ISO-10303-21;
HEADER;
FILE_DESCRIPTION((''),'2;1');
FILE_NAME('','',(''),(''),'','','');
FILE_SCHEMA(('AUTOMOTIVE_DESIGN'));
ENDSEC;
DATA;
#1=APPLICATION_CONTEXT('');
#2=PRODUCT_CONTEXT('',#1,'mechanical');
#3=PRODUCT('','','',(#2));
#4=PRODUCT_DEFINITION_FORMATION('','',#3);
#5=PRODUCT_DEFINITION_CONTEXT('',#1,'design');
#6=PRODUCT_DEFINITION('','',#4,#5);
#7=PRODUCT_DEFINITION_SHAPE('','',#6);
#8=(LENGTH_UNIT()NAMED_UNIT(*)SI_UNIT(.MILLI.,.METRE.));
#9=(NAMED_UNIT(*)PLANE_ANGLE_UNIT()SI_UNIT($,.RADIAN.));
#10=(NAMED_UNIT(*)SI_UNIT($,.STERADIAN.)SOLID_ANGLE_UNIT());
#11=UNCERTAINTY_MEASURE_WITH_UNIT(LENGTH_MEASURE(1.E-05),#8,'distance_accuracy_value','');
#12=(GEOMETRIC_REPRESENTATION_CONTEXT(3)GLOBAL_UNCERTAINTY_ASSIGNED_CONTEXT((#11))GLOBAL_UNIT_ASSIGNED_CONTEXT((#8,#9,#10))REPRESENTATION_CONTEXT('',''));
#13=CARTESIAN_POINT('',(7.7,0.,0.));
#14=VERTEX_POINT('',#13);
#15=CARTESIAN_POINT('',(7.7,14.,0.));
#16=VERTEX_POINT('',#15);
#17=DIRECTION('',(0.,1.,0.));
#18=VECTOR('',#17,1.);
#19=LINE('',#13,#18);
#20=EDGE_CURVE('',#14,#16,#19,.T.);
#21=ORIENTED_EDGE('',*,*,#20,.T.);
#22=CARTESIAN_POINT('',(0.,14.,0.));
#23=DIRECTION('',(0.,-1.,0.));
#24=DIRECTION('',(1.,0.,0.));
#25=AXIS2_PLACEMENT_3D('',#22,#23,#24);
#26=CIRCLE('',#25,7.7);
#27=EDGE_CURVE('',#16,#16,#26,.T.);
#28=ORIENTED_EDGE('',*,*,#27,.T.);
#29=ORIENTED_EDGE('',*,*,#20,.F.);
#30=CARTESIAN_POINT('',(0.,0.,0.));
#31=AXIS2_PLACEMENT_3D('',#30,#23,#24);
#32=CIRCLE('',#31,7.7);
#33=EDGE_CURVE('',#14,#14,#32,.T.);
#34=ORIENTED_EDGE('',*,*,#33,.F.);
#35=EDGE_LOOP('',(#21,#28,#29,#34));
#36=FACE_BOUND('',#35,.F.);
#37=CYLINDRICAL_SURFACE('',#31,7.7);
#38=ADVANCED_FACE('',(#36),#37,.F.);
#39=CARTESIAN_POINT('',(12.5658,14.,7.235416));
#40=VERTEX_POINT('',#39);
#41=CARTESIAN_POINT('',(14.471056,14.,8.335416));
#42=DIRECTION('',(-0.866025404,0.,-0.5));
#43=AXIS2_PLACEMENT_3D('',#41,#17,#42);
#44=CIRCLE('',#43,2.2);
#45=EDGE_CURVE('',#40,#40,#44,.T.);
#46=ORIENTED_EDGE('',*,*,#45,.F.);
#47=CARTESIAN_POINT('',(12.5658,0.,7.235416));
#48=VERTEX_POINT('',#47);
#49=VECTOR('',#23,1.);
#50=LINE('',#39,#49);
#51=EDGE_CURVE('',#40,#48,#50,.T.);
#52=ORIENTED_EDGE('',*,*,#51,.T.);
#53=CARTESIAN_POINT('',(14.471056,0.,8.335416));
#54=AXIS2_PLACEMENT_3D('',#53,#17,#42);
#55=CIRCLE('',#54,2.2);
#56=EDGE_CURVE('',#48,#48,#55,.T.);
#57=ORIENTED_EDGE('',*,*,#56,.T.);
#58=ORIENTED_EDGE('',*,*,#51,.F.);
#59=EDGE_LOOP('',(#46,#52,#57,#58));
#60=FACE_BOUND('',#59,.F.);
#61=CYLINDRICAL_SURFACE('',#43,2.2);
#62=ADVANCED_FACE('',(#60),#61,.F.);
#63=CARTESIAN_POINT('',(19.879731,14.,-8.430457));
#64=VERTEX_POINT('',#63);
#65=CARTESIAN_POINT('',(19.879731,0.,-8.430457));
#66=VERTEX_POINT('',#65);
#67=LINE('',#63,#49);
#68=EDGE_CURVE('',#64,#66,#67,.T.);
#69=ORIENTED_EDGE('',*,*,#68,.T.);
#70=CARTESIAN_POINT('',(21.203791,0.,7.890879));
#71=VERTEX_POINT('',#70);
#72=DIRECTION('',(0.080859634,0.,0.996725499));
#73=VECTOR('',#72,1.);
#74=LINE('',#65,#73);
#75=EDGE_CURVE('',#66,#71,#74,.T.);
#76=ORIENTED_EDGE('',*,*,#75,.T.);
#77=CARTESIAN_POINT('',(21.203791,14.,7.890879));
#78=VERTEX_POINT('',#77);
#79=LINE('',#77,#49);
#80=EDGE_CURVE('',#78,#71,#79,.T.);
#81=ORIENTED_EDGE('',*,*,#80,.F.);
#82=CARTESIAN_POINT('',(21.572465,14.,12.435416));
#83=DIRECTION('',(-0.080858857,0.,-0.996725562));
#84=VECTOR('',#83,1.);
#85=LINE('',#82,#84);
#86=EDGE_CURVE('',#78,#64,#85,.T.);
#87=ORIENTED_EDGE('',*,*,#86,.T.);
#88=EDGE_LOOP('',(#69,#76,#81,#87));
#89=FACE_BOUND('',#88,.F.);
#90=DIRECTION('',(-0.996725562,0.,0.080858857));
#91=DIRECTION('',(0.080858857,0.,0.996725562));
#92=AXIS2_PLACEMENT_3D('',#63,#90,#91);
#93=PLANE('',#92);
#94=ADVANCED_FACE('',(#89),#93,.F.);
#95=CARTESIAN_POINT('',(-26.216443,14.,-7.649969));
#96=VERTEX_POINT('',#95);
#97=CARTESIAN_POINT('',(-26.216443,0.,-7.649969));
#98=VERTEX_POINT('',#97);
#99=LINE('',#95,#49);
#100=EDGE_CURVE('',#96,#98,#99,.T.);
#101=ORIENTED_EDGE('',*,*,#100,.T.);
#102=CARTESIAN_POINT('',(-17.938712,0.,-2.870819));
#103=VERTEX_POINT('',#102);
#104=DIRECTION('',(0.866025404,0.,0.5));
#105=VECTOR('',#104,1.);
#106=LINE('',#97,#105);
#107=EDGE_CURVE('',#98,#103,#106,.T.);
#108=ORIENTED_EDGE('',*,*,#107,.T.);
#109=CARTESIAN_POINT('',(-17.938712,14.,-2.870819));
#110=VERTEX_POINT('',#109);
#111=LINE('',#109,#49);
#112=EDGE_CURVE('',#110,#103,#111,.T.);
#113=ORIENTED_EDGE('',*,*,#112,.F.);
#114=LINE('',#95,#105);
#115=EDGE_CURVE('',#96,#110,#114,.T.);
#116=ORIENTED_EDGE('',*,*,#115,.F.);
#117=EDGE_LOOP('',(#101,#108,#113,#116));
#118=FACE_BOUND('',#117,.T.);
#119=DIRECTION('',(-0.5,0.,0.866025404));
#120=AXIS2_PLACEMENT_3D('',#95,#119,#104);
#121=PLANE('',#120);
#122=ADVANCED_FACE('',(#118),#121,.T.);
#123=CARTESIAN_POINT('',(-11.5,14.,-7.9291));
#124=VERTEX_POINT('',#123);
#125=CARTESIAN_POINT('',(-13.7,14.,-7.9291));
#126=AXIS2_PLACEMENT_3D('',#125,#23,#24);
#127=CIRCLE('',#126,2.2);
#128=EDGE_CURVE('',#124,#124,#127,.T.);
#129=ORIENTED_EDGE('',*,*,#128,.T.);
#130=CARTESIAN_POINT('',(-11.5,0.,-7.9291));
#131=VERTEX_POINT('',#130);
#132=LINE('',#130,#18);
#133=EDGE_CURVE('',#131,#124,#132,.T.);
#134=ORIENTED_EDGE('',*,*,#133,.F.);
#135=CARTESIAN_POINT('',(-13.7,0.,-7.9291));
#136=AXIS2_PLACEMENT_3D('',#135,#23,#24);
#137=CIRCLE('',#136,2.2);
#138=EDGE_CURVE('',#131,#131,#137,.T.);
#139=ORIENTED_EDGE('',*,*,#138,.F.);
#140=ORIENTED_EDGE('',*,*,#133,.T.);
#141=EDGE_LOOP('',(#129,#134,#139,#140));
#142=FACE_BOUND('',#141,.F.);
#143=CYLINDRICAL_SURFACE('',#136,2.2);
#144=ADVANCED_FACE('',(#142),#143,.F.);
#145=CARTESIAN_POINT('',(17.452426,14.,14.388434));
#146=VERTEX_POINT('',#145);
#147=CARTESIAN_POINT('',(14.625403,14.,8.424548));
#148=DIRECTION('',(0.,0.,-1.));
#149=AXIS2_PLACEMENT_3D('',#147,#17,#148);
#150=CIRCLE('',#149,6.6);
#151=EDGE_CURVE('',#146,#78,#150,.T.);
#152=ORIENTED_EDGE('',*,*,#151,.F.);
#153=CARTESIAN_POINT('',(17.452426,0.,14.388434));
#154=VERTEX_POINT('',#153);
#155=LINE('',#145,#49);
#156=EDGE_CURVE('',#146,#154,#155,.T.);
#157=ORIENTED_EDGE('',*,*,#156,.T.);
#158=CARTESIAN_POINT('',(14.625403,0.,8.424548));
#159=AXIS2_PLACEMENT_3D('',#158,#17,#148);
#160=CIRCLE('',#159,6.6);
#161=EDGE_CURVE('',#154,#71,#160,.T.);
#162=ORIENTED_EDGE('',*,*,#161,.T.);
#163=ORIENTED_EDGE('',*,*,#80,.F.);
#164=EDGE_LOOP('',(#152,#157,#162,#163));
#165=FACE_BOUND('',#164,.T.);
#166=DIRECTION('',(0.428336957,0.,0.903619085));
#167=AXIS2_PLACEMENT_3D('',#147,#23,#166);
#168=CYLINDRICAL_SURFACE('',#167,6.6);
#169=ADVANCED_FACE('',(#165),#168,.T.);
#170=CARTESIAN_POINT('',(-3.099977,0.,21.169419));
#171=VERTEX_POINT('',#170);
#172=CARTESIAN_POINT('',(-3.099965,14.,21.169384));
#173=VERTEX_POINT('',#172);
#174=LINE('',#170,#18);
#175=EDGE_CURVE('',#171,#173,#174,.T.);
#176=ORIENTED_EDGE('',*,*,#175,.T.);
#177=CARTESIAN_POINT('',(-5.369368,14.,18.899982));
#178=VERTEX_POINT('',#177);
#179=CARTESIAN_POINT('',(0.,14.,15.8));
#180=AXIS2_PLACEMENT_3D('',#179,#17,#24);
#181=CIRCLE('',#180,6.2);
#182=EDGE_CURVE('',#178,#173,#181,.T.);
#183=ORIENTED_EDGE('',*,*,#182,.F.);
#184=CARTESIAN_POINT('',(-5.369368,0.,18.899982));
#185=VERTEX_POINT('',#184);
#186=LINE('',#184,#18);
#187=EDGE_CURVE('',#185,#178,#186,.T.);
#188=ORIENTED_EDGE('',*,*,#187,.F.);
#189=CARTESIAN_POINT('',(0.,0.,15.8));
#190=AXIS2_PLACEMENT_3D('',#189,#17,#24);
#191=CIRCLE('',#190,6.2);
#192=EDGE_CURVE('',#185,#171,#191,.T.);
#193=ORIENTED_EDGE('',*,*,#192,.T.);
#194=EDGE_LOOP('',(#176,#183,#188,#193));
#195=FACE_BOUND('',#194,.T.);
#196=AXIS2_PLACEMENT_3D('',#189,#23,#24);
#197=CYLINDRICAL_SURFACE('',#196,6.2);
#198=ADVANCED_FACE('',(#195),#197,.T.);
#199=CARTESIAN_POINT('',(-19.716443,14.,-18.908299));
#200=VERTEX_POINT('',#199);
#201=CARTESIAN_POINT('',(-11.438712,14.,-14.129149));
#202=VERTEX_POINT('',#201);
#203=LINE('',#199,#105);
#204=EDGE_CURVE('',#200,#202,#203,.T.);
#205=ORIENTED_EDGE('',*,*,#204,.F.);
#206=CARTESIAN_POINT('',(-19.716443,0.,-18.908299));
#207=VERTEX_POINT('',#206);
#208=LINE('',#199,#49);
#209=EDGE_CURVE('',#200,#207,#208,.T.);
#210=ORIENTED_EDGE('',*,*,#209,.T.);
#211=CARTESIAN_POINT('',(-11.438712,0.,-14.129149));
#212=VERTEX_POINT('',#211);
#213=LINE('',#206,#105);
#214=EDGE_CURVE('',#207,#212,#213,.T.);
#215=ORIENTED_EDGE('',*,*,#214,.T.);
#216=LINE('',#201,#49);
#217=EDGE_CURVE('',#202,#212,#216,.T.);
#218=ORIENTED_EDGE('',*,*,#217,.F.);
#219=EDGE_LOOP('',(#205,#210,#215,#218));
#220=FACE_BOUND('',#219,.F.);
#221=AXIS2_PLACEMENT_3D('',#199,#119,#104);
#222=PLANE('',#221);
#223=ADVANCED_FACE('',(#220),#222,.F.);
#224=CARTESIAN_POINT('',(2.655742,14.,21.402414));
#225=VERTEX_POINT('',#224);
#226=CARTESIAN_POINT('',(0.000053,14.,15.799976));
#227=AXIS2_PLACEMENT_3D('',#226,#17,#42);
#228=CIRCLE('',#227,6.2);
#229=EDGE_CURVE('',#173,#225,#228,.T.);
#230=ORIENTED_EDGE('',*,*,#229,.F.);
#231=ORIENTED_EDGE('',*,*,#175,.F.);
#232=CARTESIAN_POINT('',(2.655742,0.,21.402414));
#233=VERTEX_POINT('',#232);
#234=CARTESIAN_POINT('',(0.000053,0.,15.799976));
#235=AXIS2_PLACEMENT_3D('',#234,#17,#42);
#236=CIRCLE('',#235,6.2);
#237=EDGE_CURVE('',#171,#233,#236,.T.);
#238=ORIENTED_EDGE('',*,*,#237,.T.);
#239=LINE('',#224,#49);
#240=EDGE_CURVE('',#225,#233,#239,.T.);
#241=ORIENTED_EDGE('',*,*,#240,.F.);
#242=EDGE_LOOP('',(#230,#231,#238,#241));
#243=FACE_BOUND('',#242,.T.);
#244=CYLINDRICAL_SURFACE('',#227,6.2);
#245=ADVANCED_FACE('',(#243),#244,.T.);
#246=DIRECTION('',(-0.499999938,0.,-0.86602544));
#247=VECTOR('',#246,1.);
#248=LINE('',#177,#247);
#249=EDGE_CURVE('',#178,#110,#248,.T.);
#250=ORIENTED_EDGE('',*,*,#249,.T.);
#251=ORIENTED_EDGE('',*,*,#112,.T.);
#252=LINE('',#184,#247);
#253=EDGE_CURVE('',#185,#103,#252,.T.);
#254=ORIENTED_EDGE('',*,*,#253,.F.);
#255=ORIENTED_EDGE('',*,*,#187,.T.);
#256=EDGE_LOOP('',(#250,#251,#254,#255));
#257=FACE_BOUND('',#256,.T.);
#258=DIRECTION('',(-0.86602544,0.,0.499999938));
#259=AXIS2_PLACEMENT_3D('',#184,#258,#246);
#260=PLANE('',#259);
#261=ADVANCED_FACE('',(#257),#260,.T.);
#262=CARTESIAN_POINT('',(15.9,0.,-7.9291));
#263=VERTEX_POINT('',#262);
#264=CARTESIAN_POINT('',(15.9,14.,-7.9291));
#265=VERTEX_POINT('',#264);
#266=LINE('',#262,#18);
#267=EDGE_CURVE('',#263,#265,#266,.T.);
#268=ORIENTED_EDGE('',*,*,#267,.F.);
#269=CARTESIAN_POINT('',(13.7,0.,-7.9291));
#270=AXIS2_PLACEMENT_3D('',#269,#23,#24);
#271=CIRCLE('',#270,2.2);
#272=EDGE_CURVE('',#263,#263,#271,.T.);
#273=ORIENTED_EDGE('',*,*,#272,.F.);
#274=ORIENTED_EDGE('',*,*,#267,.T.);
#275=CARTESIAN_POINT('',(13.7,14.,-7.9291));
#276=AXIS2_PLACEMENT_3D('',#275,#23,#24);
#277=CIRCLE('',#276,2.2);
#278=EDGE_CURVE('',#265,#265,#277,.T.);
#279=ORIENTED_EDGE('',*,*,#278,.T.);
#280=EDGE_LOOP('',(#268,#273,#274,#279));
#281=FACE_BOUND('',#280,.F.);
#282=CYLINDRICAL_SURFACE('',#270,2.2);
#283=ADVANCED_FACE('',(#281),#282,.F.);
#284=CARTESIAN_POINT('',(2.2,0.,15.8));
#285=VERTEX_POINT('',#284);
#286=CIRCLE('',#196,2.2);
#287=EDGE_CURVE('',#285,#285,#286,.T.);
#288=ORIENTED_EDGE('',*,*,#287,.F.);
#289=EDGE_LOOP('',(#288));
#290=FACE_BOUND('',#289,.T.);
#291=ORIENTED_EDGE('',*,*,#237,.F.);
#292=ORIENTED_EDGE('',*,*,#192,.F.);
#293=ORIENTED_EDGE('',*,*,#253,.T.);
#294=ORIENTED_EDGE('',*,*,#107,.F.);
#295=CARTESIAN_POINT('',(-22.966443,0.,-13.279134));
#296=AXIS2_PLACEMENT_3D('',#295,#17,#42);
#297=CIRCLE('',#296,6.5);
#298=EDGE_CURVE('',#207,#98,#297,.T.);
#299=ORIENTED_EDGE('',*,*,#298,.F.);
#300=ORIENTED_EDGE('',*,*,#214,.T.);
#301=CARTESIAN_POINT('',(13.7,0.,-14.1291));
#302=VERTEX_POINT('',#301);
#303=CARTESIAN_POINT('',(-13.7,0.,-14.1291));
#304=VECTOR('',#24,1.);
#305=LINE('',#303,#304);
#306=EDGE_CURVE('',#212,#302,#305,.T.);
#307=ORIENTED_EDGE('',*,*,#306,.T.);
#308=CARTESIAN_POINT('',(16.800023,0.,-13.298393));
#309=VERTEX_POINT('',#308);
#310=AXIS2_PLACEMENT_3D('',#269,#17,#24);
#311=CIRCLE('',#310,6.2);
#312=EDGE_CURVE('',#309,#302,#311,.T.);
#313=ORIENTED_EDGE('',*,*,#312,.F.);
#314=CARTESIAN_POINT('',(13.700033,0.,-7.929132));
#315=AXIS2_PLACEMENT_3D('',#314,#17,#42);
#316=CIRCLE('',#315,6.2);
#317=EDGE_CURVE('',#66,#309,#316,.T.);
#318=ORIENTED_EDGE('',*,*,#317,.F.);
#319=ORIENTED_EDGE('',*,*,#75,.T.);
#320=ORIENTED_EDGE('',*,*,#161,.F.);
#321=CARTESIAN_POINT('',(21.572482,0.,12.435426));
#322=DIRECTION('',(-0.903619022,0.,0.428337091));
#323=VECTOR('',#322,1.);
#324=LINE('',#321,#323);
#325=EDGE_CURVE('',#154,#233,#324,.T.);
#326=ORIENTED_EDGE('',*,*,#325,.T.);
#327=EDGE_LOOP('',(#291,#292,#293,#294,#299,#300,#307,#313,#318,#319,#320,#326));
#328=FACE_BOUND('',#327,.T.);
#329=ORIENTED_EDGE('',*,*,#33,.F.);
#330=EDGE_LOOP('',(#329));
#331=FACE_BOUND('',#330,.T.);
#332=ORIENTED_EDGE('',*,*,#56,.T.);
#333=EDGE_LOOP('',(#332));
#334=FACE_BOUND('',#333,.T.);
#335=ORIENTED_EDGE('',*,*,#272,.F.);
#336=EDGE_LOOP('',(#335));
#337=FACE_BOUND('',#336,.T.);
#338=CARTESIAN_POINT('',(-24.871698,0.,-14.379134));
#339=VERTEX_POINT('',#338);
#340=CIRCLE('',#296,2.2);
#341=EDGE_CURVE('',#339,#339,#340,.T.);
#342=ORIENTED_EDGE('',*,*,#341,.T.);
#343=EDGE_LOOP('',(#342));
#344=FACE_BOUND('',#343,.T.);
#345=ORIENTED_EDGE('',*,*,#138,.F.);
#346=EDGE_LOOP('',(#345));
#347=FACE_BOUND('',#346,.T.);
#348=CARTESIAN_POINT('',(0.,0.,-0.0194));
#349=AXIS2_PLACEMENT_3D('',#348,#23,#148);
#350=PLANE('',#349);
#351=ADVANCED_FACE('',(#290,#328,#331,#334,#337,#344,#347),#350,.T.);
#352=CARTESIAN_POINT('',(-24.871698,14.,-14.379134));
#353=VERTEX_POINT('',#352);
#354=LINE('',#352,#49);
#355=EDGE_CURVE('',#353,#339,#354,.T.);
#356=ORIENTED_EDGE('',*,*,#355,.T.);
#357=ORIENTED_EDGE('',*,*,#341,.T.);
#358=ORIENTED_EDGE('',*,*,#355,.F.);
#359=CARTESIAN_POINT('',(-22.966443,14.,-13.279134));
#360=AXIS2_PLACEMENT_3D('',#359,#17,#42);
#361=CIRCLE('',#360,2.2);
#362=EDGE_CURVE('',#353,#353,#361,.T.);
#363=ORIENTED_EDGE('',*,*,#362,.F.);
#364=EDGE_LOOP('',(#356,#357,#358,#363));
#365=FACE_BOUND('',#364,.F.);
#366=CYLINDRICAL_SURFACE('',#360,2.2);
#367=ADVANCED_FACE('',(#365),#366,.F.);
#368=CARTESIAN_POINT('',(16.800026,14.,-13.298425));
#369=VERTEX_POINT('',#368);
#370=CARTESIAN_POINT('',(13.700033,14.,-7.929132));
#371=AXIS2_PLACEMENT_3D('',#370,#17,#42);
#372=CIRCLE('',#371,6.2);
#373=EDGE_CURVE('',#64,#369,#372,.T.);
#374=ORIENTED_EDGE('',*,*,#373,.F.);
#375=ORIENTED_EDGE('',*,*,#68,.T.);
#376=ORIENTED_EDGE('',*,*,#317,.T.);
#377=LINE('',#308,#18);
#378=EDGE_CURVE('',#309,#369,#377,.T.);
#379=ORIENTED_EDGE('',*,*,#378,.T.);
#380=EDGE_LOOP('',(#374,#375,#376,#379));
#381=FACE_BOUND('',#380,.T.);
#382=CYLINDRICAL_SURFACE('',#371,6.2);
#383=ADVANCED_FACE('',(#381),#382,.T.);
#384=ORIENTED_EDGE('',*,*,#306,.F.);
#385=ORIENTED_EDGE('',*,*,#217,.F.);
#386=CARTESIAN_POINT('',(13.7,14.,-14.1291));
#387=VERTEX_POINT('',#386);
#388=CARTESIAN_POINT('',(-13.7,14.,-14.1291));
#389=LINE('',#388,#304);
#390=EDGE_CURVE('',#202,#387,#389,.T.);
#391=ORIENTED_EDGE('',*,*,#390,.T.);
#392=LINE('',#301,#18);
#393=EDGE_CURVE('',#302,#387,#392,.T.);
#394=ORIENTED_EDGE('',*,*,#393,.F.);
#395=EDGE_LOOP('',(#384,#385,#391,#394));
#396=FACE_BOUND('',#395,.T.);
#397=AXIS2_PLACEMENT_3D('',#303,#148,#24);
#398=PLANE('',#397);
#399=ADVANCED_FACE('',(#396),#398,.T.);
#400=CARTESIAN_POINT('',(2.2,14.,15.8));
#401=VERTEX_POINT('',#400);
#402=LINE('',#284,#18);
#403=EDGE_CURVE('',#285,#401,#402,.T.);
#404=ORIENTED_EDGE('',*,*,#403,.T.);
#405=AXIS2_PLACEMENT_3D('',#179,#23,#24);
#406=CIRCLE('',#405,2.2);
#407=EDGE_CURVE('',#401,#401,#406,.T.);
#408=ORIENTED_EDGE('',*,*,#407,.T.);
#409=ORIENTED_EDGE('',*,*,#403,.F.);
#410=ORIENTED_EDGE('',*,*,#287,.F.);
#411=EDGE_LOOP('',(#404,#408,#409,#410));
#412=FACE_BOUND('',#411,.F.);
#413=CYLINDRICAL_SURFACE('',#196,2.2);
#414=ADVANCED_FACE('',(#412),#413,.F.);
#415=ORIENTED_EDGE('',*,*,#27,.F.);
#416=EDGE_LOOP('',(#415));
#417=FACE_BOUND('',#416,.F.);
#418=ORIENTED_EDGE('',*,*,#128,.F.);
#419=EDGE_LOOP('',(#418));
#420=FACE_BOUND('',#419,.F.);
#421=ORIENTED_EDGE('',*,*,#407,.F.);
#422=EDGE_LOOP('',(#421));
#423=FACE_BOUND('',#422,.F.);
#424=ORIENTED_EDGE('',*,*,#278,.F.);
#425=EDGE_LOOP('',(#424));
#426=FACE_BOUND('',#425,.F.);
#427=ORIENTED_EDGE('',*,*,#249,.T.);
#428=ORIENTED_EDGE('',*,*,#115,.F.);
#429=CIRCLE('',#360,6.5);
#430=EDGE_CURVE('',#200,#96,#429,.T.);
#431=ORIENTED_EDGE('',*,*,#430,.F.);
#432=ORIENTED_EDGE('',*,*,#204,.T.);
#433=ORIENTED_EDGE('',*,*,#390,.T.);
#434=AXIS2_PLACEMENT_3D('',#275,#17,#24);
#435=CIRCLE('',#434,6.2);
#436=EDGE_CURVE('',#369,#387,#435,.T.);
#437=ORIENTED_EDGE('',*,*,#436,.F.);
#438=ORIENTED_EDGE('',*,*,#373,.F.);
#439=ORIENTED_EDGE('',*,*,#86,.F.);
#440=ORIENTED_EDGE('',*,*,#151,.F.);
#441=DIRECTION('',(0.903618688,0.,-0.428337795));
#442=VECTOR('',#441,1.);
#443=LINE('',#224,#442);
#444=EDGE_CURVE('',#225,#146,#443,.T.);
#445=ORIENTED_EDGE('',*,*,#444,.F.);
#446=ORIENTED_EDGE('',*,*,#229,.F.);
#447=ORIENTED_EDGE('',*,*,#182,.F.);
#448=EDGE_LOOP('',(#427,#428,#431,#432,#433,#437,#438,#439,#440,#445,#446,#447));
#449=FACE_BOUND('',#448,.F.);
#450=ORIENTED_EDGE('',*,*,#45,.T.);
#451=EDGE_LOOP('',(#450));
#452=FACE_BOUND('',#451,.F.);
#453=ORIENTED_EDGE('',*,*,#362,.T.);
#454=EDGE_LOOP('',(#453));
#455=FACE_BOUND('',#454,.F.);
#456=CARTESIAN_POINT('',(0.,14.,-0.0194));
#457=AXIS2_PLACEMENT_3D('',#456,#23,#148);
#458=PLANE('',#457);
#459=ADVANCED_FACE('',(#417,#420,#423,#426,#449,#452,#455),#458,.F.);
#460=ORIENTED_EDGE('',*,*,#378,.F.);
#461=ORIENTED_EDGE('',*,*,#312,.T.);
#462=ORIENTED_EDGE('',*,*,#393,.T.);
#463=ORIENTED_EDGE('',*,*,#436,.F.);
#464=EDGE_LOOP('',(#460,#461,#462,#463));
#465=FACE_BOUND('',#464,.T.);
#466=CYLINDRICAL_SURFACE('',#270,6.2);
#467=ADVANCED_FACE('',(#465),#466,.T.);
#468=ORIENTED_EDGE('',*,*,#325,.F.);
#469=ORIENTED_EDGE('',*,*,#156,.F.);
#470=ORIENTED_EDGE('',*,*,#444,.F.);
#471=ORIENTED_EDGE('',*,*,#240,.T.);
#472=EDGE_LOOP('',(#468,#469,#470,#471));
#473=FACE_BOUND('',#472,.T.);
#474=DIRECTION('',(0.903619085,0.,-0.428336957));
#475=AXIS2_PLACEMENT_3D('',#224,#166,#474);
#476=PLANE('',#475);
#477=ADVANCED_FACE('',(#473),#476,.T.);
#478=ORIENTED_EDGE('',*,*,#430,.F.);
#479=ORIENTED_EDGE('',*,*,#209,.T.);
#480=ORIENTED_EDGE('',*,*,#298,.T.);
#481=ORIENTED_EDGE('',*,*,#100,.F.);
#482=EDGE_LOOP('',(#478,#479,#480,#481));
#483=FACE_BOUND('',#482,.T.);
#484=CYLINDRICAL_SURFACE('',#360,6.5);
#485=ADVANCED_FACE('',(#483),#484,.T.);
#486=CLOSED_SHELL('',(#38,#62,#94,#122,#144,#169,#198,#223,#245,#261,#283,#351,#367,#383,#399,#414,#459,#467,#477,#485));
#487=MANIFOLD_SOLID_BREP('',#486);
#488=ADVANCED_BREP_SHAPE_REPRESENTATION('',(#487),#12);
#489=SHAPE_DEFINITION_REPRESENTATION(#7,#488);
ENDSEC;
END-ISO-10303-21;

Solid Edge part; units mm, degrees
sketch "Sketch1" plane through (0, 0, 0) normal (0, -1, 0) x (1, 0, 0)
  line L0 (-5.3694, 18.9) -> (-19.0694, -4.8291)
  arc A0 (-13.7, -14.1291) -> (-19.0694, -4.8291) centre (-13.7, -7.9291) cw
  line L1 (-13.7, -14.1291) -> (13.7, -14.1291)
  arc A1 (19.0694, -4.8291) -> (13.7, -14.1291) centre (13.7, -7.9291) cw
  line L2 (5.3694, 18.9) -> (19.0694, -4.8291)
  arc A2 (-5.3694, 18.9) -> (5.3694, 18.9) centre (0, 15.8) cw
  dimension "D1" = 5.3694
extrude "Protrusion1" add sketch "Sketch1" against normal blind 14
sketch "Sketch2" plane through (0, 0, 0) normal (0, -1, 0) x (1, 0, 0)
  circle A0 centre (-13.7, -7.9291) radius 2.2
  circle A1 centre (13.7, -7.9291) radius 2.2
  circle A2 centre (0, 15.8) radius 2.2
  dimension "D1" = 30.8
  dimension "D2" = 4
  dimension "D3" = 4.4
  dimension "D4" = 6.2
  dimension "D5" = 6.2
  dimension "D6" = 4.4
  dimension "D7" = 6.2
  dimension "D8" = 27.4
  dimension "D9" = 27.4
  dimension "D10" = 27.4
extrude "Cutout1" cut sketch "Sketch2" against normal blind 457.8755
sketch "Sketch3" plane through (0, 0, 0) normal (0, -1, 0) x (1, 0, 0)
  circle A0 centre (0, 0) radius 7.7
extrude "Cutout2" cut sketch "Sketch3" against normal blind 434.4917
sketch "Sketch4" plane through (0, 0, 3.9355) normal (0, -1, 0) x (-0.5, 0, 0.8660254)
  line L0 (-23.325, -5.9323) -> (-23.325, -18.9323)
  line L1 (-23.325, -18.9323) -> (16.475, -18.9323)
  line L2 (16.475, -18.9323) -> (16.475, -5.9323)
  line L3 (12.7755, -8.7037) -> (16.475, -5.9323)
  line L4 (-20.9306, -8.7037) -> (12.7755, -8.7037)
  line L5 (-20.9306, -5.9323) -> (-20.9306, -8.7037)
  line L6 (-23.325, -5.9323) -> (-20.9306, -5.9323)
  dimension "D1" = 13
extrude "Protrusion2" add sketch "Sketch4" against normal up to vertex (14 mm away)
sketch "Sketch5" plane through (18.1083, 8, 10.4355) normal (0.8660254, 0, 0.5) x (-0.5, 0, 0.8660254)
  line L0 (-19.9, 8) -> (19.9, 8)
  line L1 (19.9, -6) -> (19.9, 8)
  line L2 (-19.9, -6) -> (19.9, -6)
  line L3 (-19.9, -6) -> (-19.9, 8)
extrude "ExtrudedProtrusion_14" add sketch "Sketch5" along normal blind 4
sketch "Sketch6" plane through (11.8615, 14, 7.7701) normal (0, 1, 0) x (-0.8660254, 0, -0.5)
  circle A0 centre (-2.5426, -0.8152) radius 2.2
  dimension "D1" = 6
  dimension "D2" = 19.9
  dimension "D3" = 4.4
extrude "ExtrudedCutout_23" cut sketch "Sketch6" against normal blind 166.5817
sketch "Sketch7" plane through (11.8615, 14, 7.7701) normal (0, 1, 0) x (-0.8660254, 0, -0.5)
  circle A0 centre (40.6865, -0.8152) radius 2.2
  line L0 (40.6865, 5.6848) -> (31.1282, 5.6848)
  line L1 (31.1282, 5.6848) -> (31.1282, 3.8832)
  line L2 (31.1282, 3.8832) -> (34.2429, 1.8592)
  line L3 (34.2429, 1.8592) -> (34.2429, -2.6486)
  line L4 (31.1282, -7.3152) -> (34.2429, -2.6486)
  line L5 (40.6865, -7.3152) -> (31.1282, -7.3152)
  arc A1 (40.6865, -7.3152) -> (40.6865, 5.6848) centre (40.6865, -0.8152) ccw
extrude "Protrusion3" add sketch "Sketch7" against normal up to vertex (14 mm away)
sketch "Sketch8" plane through (11.8615, 14, 7.7701) normal (0, 1, 0) x (-0.8660254, 0, -0.5)
  line L0 (-10.7426, -0.8152) -> (-10.7426, -20.7152)
  line L1 (-10.7426, -20.7152) -> (6.2574, -20.7152)
  arc A0 (1.1563, -18.0392) -> (6.2574, -20.7152) centre (6.2574, -14.5152) ccw
  line L2 (1.1563, -18.0392) -> (-10.7426, -0.8152)
extrude "Cutout3" cut sketch "Sketch8" against normal blind 85.4791
sketch "Sketch9" plane through (6.8865, 14, 7.7701) normal (0, 1, 0) x (-0.8660254, 0, -0.5)
  line L0 (-15.0511, 16.5973) -> (-15.0511, -3.3027)
  line L1 (-3.1522, 13.9213) -> (-15.0511, -3.3027)
  arc A0 (1.9489, 16.5973) -> (-3.1522, 13.9213) centre (1.9489, 10.3973) ccw
  line L2 (1.9489, 16.5973) -> (-15.0511, 16.5973)
extrude "ExtrudedCutout_27" cut sketch "Sketch9" against normal blind 118.3722
fillet "Round_1" radius 6.6 1 edges at (21.5724, 7, 12.4355)
